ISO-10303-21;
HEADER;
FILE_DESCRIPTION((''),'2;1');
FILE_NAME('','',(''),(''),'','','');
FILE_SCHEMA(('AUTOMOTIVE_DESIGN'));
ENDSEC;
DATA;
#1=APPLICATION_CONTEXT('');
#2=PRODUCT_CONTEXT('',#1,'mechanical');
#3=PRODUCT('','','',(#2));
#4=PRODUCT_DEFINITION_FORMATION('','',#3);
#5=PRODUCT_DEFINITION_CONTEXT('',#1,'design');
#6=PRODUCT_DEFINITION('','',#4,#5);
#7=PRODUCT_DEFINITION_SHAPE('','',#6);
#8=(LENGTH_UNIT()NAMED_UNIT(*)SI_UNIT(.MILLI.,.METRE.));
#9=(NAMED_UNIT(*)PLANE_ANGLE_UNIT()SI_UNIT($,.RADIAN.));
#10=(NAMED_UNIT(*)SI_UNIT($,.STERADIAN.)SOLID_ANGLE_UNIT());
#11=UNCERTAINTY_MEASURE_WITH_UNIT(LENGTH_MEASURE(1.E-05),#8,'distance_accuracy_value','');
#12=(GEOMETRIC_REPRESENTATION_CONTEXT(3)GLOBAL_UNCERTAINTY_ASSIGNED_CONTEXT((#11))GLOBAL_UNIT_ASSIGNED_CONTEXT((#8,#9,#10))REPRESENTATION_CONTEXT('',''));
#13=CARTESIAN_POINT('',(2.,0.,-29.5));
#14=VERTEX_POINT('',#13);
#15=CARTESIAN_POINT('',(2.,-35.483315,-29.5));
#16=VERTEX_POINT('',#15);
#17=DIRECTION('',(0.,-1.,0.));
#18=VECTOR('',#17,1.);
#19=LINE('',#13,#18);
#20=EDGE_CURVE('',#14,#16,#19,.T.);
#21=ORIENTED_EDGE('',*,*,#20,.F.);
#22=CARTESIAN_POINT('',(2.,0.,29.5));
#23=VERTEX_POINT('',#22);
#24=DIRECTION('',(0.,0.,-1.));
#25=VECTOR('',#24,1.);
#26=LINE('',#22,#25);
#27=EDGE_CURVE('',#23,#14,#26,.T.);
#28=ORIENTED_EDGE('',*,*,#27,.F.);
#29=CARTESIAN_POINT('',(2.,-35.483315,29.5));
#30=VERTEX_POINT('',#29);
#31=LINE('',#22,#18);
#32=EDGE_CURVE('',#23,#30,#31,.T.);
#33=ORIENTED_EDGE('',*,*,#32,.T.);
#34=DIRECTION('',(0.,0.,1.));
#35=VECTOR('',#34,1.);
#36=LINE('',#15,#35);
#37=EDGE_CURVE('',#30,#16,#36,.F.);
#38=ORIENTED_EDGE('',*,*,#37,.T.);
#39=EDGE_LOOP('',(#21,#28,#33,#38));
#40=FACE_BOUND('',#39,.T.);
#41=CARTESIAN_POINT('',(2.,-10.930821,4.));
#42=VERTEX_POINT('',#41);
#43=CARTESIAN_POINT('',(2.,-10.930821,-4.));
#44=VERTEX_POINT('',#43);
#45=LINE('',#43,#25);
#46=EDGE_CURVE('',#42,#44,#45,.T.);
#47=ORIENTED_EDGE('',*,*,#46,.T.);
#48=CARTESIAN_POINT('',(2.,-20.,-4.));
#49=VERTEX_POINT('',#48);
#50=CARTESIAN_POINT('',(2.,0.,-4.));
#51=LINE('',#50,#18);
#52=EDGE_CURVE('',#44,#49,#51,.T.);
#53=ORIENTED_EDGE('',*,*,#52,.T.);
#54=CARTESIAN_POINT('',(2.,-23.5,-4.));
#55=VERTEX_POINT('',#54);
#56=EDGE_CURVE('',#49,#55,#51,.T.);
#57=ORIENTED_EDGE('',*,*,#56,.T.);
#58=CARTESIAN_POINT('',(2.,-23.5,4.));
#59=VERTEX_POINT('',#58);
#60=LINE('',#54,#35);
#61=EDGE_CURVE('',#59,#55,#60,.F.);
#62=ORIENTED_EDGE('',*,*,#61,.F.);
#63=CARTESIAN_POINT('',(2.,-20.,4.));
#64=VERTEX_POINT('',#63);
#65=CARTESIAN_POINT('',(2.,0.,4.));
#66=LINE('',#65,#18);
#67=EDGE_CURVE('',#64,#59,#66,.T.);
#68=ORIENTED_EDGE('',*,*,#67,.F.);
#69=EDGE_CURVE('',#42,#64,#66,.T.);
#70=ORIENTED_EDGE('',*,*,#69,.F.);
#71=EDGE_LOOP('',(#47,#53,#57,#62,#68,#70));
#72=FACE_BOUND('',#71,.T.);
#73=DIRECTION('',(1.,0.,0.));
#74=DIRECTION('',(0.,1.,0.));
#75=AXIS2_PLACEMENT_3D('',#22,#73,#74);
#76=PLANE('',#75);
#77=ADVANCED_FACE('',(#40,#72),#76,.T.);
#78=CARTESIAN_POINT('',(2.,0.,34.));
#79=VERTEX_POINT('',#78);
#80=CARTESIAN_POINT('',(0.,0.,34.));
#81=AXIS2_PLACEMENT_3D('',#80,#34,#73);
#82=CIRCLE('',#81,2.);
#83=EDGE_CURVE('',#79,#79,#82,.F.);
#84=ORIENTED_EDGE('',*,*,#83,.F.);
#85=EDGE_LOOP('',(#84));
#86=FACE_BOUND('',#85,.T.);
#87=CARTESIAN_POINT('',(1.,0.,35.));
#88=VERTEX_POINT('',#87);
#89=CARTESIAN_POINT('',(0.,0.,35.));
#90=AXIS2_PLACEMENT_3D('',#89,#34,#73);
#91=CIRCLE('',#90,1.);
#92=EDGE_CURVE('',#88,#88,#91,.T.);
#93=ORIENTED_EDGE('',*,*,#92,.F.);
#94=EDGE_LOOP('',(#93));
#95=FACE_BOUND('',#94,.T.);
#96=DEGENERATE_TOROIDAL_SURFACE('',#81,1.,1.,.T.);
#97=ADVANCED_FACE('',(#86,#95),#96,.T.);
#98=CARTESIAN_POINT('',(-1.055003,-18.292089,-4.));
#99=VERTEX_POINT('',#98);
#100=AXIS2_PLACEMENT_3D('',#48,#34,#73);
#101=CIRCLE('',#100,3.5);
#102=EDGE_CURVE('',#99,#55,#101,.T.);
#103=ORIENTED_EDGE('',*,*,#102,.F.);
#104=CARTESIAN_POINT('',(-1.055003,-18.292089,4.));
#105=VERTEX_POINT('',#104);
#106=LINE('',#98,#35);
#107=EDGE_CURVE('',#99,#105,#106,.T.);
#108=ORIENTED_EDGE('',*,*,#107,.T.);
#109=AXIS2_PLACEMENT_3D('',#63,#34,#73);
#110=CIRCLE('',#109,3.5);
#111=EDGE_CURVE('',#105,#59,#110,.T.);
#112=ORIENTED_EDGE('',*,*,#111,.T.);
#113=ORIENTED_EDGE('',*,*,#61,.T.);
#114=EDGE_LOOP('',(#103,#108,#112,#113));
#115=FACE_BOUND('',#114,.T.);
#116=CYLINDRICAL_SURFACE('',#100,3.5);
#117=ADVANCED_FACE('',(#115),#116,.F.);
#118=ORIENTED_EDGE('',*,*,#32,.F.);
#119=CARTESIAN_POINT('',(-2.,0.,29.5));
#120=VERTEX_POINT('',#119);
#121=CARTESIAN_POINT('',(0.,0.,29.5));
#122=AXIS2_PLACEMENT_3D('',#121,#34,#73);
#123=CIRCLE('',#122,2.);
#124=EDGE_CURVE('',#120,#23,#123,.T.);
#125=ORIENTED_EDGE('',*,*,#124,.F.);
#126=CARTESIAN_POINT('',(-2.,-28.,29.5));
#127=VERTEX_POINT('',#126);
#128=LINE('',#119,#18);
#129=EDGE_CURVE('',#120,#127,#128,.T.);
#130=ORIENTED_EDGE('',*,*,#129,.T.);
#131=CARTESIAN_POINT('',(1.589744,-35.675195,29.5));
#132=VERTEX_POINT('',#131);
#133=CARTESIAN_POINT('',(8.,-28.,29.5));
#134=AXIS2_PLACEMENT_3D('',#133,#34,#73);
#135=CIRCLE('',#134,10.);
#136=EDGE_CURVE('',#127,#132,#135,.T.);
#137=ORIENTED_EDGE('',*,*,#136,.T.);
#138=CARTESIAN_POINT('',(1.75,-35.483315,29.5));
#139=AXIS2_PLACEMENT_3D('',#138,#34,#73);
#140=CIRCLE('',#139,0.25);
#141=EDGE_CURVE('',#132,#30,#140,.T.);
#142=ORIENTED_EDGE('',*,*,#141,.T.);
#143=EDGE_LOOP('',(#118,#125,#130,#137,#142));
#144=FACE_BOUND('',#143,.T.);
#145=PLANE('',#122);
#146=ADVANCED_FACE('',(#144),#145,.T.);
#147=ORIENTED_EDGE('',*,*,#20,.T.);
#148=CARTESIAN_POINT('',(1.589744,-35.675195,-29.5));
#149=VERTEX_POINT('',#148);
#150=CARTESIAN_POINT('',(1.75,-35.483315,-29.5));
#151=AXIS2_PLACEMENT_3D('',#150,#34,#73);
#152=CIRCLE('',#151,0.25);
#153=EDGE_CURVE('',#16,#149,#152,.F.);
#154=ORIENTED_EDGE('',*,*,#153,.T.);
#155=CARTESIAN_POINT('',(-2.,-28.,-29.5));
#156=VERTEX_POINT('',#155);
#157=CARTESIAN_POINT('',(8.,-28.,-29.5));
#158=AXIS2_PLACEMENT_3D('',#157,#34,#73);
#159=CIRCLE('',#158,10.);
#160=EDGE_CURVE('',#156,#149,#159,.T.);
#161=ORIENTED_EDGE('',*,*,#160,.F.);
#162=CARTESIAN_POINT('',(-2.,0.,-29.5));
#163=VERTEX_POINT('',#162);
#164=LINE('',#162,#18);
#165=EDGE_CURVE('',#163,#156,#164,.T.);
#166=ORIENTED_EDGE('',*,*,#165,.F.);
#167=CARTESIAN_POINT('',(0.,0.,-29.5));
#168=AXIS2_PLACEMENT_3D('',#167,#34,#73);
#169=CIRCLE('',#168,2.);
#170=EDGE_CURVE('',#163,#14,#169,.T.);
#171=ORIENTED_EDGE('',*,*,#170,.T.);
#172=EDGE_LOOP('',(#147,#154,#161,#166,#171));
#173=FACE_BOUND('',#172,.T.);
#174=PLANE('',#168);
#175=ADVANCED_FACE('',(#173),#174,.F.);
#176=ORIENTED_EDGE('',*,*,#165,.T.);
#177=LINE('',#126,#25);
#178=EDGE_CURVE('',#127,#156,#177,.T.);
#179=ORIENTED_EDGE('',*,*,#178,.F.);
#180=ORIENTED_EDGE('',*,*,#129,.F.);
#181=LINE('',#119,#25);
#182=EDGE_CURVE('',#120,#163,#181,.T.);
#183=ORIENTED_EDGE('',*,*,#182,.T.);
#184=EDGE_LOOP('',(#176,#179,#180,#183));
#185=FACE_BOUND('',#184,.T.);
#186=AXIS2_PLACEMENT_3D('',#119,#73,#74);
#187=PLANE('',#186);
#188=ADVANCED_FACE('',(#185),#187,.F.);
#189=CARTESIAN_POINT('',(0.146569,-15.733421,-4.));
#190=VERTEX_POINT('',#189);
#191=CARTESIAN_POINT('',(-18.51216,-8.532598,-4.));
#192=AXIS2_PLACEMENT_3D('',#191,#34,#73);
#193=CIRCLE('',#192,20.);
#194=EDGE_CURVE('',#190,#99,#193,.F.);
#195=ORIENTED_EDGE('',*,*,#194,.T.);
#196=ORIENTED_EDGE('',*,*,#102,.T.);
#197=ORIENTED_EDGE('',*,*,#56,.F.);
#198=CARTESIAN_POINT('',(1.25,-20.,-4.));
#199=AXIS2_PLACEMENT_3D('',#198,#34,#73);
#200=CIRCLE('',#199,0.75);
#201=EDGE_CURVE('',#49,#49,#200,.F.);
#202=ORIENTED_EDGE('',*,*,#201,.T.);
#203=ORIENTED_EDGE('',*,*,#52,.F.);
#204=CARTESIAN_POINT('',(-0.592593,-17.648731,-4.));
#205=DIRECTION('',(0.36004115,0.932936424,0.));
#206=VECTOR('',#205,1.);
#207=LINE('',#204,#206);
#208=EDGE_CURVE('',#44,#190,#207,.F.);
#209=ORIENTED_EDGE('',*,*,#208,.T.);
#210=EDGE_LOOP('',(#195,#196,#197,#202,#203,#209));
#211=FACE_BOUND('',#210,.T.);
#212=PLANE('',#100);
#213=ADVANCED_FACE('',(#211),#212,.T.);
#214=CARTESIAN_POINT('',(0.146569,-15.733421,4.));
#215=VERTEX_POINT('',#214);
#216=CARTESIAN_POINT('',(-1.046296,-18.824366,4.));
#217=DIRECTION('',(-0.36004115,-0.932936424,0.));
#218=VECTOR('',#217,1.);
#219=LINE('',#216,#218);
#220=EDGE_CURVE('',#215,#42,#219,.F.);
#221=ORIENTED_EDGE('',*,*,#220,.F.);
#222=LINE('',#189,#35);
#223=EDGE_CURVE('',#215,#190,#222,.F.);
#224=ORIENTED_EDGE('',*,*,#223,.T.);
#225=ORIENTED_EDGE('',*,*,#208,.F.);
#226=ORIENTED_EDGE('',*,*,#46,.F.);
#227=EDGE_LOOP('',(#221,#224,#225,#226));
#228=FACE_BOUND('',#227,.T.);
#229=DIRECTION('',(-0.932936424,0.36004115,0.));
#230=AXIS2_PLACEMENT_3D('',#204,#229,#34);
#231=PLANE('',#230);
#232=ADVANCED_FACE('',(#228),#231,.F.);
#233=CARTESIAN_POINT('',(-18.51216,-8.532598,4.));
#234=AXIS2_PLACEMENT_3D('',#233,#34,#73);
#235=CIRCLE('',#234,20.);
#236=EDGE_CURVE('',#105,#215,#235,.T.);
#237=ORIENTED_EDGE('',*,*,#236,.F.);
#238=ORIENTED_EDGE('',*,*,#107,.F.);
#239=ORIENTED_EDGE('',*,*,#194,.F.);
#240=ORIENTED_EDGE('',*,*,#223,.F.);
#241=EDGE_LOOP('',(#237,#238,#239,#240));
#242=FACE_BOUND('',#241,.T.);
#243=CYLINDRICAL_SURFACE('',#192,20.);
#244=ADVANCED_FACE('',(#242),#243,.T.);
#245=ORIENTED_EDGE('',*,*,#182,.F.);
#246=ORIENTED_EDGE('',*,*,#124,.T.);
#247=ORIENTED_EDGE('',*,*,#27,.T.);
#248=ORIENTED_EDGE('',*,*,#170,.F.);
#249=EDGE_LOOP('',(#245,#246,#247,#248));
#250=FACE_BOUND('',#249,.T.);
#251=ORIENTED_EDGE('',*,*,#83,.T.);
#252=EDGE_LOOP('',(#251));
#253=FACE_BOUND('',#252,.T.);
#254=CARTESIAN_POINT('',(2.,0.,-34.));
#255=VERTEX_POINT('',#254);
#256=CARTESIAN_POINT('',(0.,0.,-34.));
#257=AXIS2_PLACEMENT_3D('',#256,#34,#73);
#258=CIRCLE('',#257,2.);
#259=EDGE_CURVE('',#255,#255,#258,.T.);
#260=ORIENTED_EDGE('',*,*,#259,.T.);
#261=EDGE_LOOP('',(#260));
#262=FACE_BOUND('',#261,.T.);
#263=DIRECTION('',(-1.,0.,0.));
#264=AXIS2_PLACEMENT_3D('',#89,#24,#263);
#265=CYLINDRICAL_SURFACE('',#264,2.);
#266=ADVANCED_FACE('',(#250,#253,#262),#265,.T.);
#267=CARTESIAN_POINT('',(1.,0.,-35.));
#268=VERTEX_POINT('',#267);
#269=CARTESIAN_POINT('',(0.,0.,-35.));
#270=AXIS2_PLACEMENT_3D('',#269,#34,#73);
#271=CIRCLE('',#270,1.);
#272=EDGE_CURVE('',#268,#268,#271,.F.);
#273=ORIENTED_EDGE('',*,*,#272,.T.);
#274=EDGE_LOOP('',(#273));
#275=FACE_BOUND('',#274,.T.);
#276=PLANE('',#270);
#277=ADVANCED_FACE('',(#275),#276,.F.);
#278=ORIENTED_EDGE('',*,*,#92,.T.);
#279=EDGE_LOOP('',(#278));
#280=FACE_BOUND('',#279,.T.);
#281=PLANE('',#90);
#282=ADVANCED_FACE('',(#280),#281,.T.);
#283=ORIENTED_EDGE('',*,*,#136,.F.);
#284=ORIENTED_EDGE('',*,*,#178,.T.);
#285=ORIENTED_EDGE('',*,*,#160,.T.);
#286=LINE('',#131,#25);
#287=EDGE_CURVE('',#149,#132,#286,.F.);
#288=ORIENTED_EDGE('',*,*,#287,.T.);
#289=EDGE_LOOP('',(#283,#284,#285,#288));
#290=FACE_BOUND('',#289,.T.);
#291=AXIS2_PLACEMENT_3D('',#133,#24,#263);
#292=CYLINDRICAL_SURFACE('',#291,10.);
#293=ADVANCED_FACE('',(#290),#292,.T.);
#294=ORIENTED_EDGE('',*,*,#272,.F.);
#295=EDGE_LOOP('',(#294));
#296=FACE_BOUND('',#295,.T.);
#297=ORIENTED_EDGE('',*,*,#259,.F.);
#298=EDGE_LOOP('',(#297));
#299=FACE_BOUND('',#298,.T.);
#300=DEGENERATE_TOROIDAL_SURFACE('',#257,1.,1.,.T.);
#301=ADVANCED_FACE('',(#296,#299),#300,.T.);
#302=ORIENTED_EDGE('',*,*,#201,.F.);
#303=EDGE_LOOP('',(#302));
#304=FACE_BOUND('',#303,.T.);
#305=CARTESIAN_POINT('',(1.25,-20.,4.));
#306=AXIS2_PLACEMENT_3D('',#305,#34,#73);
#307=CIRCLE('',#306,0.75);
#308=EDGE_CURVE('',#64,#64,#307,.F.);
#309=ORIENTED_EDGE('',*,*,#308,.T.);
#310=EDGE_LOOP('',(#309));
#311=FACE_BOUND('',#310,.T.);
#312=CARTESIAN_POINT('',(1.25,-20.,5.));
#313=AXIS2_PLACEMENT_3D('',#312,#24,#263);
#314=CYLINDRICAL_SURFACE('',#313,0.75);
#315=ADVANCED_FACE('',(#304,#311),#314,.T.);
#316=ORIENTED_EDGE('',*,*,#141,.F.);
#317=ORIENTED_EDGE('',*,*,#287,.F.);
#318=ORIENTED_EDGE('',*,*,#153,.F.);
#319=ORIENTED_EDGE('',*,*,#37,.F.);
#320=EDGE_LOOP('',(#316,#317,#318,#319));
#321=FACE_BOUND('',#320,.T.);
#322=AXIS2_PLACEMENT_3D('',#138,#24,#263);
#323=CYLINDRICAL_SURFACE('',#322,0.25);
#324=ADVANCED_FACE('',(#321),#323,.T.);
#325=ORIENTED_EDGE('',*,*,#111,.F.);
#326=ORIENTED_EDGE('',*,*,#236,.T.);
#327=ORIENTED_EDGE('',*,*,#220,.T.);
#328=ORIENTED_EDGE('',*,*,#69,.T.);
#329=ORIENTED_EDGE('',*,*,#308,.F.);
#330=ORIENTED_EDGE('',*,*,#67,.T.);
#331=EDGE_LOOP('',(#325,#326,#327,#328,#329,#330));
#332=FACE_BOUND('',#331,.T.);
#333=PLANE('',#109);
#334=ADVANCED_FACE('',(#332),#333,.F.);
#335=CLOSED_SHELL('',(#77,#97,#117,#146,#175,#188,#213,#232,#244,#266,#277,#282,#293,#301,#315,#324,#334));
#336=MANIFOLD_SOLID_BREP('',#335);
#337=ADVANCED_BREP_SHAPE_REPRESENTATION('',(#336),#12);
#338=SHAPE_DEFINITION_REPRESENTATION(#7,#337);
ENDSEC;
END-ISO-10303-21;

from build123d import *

# Parameters (mm, degrees)
BOSS_EXTRUDE1_DEPTH = 29.5
SKETCH3_4_R         = 2
BOSS_EXTRUDE2_DEPTH = 35
FILLET1_R           = 1
FILLET2_R           = 0.25
SKETCH4_R           = 3.5
CUT_EXTRUDE1_DEPTH  = 4
SKETCH5_R           = 0.75
BOSS_EXTRUDE3_DEPTH = 5
FILLET3_R           = 20


with BuildPart() as part:
    # Sketch3 → Boss-Extrude1 (new, symmetric)
    with BuildSketch(Plane.XY):
        with BuildLine():
            Line((2, -36), (2, 0))
            ThreePointArc((2, 0), (0, -2), (-2, 0))
            Line((-2, 0), (-2, -28))
            ThreePointArc((-2, -28), (-0.94427191, -32.472135955), (2, -36))
        make_face()
    extrude(amount=BOSS_EXTRUDE1_DEPTH, both=True)

    # Sketch3<4> → Boss-Extrude2 (add, symmetric)
    with BuildSketch(Plane.XY):
        Circle(SKETCH3_4_R)
    extrude(amount=BOSS_EXTRUDE2_DEPTH, both=True)

    # Fillet1
    fillet1_edges = [part.edges().sort_by_distance(p)[0] for p in [
        (-2, 0, -35),
        (-2, 0, 35),
    ]]
    fillet(fillet1_edges, radius=FILLET1_R)

    # Fillet2
    fillet2_edges = [part.edges().sort_by_distance(p)[0] for p in [
        (2, -36, 0),
    ]]
    fillet(fillet2_edges, radius=FILLET2_R)

    # Sketch4 → Cut-Extrude1 (cut, symmetric)
    with BuildSketch(Plane.XY):
        with Locations((2, -20)):
            Circle(SKETCH4_R)
    extrude(amount=CUT_EXTRUDE1_DEPTH, both=True, mode=Mode.SUBTRACT)

    # Sketch5 → Boss-Extrude3 (add, symmetric)
    with BuildSketch(Plane.XY):
        with Locations((1.25, -20)):
            Circle(SKETCH5_R)
    extrude(amount=BOSS_EXTRUDE3_DEPTH, both=True)

    # Chamfer1
    # the kernel refuses this chamfer: 10 mm, written as the material it takes off along each edge
    with BuildSketch(Plane(origin=(2, -16.5, -4), x_dir=(0.024228479876225433, 0.9997064472948483, 0), z_dir=(0, 0, 1))) as chamfer1_piece_1:
        with BuildLine():
            Line((5.944098049, 0), (-1.587763168, 2.698932243))
            Line((-1.587763168, 2.698932243), (-1.718492524, 2.54757229))
            ThreePointArc((-1.718492524, 2.54757229), (-0.583435154, 1.461046885), (-0.199941289, -0.004845696))
            Line((-0.199941289, -0.004845696), (0.004845696, -0.199941289))
            ThreePointArc((0.004845696, -0.199941289), (2.975150071, -0.127954198), (5.948943745, -0.199941289))
            Line((5.948943745, -0.199941289), (5.944098049, 0))
        make_face()
    extrude(amount=8, mode=Mode.SUBTRACT)

    # Fillet3
    fillet3_edges = [part.edges().sort_by_distance(p)[0] for p in [
        (-0.592592593, -17.648731481, 0),
    ]]
    fillet(fillet3_edges, radius=FILLET3_R)


solid = part.part
